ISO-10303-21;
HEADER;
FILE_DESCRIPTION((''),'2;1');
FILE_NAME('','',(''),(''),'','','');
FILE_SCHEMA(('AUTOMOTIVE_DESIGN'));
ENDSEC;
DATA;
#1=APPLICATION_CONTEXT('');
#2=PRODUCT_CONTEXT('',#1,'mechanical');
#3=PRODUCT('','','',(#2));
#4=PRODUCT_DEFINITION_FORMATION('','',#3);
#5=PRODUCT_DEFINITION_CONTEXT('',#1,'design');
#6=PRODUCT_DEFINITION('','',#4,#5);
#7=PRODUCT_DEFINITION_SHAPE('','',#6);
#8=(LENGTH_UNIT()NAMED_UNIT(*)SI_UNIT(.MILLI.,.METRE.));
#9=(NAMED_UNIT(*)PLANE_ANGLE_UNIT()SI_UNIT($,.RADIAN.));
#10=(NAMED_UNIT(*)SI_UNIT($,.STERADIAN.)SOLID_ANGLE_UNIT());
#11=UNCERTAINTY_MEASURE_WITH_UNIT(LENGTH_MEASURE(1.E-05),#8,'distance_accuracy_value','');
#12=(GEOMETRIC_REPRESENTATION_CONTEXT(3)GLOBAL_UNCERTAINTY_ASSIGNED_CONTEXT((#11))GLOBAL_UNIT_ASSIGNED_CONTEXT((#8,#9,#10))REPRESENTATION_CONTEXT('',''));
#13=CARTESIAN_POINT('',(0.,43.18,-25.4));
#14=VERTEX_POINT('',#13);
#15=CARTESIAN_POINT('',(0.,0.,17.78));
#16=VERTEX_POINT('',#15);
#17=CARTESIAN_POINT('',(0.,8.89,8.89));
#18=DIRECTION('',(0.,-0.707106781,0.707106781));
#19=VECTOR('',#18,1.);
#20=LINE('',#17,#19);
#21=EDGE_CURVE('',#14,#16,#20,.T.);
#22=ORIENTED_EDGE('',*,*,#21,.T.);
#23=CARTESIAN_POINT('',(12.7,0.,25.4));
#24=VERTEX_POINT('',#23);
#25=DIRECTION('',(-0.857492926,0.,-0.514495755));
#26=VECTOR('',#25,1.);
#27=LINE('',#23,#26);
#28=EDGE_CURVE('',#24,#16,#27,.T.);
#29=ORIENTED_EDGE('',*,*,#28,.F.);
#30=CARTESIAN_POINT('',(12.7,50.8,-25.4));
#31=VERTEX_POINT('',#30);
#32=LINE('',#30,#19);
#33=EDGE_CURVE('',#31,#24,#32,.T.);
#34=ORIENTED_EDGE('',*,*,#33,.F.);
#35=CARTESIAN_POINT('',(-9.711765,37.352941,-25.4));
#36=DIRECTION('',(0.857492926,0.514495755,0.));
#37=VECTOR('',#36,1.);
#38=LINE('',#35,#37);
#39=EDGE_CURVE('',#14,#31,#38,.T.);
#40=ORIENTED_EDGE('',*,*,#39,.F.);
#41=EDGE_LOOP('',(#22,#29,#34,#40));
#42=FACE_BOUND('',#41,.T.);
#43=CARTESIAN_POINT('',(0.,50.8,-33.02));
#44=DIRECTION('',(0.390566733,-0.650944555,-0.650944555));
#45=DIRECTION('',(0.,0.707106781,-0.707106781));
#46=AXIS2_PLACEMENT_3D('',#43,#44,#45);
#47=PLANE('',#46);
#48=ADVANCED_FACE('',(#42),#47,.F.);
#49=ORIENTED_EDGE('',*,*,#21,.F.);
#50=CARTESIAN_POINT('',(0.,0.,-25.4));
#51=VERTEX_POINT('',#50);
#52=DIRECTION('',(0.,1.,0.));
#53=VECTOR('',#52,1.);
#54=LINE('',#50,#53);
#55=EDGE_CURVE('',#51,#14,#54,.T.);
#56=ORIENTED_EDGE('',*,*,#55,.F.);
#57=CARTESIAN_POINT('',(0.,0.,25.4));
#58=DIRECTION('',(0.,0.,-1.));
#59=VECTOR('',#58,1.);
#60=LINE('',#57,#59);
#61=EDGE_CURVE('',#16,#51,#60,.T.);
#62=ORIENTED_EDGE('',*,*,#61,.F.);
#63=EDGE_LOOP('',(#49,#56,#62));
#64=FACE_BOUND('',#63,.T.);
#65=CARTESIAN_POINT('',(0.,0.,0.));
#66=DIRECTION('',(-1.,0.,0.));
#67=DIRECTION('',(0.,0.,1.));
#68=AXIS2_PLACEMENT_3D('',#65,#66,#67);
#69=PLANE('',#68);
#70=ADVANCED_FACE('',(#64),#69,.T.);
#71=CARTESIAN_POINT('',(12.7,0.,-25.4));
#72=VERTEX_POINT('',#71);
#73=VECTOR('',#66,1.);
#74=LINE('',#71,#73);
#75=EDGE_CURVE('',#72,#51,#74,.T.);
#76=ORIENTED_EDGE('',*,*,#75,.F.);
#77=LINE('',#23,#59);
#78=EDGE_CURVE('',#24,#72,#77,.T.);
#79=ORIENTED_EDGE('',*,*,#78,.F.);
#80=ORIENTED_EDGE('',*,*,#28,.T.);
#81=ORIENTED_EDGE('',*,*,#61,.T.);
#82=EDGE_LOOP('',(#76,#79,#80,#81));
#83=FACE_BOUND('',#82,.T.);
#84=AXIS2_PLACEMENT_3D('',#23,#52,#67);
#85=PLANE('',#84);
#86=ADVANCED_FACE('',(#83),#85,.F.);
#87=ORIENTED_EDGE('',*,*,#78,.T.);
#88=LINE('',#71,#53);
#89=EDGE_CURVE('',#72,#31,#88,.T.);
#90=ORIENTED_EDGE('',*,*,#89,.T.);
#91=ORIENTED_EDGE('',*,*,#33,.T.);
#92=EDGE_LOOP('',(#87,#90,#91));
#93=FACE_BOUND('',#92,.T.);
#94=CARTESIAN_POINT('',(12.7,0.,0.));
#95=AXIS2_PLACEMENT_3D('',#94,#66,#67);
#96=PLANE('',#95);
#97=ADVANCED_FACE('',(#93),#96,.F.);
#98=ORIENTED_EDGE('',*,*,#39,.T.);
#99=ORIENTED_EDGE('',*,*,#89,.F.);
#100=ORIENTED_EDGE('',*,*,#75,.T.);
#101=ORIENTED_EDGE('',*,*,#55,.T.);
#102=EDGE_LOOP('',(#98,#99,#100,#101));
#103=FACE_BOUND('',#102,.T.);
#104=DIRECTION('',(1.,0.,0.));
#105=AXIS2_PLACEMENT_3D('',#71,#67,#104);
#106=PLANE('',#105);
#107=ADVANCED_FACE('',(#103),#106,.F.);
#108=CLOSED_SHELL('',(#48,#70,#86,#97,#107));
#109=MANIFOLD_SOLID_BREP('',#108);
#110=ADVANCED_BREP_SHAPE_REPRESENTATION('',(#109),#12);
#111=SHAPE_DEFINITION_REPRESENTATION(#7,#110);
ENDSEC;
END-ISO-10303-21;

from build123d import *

# Parameters (mm, degrees)
BOSS_EXTRUDE1_DEPTH    = 12.7
CUT_EXTRUDE1_START     = -16.533991695
CUT_EXTRUDE1_OUTLINE_W = 17
CUT_EXTRUDE1_OUTLINE_H = 74
CUT_EXTRUDE1_DEPTH     = 4.960197509


# Read off the part's stored shape, not the designer's step: Cut-Extrude1
with BuildPart() as part:
    # Sketch1 → Boss-Extrude1 (new body)
    with BuildSketch(Plane(origin=(0, 0, 0), x_dir=(0, 0, -1), z_dir=(1, 0, 0))):
        Polygon((-25.4, 0), (25.4, 0), (25.4, 50.8), align=None)
    extrude(amount=BOSS_EXTRUDE1_DEPTH)

    # Cut-Extrude1 outline → Cut-Extrude1 (cut)
    with BuildSketch(Plane(origin=(0, 0, 0), x_dir=(0.9205746178983232, 0.2761723853694974, 0.27617238536949734), z_dir=(0.39056673294247213, -0.6509445549041193, -0.6509445549041192)).offset(CUT_EXTRUDE1_START)):
        with Locations((11.5, -18)):
            Rectangle(CUT_EXTRUDE1_OUTLINE_W, CUT_EXTRUDE1_OUTLINE_H)
    extrude(amount=CUT_EXTRUDE1_DEPTH, mode=Mode.SUBTRACT)


solid = part.part
